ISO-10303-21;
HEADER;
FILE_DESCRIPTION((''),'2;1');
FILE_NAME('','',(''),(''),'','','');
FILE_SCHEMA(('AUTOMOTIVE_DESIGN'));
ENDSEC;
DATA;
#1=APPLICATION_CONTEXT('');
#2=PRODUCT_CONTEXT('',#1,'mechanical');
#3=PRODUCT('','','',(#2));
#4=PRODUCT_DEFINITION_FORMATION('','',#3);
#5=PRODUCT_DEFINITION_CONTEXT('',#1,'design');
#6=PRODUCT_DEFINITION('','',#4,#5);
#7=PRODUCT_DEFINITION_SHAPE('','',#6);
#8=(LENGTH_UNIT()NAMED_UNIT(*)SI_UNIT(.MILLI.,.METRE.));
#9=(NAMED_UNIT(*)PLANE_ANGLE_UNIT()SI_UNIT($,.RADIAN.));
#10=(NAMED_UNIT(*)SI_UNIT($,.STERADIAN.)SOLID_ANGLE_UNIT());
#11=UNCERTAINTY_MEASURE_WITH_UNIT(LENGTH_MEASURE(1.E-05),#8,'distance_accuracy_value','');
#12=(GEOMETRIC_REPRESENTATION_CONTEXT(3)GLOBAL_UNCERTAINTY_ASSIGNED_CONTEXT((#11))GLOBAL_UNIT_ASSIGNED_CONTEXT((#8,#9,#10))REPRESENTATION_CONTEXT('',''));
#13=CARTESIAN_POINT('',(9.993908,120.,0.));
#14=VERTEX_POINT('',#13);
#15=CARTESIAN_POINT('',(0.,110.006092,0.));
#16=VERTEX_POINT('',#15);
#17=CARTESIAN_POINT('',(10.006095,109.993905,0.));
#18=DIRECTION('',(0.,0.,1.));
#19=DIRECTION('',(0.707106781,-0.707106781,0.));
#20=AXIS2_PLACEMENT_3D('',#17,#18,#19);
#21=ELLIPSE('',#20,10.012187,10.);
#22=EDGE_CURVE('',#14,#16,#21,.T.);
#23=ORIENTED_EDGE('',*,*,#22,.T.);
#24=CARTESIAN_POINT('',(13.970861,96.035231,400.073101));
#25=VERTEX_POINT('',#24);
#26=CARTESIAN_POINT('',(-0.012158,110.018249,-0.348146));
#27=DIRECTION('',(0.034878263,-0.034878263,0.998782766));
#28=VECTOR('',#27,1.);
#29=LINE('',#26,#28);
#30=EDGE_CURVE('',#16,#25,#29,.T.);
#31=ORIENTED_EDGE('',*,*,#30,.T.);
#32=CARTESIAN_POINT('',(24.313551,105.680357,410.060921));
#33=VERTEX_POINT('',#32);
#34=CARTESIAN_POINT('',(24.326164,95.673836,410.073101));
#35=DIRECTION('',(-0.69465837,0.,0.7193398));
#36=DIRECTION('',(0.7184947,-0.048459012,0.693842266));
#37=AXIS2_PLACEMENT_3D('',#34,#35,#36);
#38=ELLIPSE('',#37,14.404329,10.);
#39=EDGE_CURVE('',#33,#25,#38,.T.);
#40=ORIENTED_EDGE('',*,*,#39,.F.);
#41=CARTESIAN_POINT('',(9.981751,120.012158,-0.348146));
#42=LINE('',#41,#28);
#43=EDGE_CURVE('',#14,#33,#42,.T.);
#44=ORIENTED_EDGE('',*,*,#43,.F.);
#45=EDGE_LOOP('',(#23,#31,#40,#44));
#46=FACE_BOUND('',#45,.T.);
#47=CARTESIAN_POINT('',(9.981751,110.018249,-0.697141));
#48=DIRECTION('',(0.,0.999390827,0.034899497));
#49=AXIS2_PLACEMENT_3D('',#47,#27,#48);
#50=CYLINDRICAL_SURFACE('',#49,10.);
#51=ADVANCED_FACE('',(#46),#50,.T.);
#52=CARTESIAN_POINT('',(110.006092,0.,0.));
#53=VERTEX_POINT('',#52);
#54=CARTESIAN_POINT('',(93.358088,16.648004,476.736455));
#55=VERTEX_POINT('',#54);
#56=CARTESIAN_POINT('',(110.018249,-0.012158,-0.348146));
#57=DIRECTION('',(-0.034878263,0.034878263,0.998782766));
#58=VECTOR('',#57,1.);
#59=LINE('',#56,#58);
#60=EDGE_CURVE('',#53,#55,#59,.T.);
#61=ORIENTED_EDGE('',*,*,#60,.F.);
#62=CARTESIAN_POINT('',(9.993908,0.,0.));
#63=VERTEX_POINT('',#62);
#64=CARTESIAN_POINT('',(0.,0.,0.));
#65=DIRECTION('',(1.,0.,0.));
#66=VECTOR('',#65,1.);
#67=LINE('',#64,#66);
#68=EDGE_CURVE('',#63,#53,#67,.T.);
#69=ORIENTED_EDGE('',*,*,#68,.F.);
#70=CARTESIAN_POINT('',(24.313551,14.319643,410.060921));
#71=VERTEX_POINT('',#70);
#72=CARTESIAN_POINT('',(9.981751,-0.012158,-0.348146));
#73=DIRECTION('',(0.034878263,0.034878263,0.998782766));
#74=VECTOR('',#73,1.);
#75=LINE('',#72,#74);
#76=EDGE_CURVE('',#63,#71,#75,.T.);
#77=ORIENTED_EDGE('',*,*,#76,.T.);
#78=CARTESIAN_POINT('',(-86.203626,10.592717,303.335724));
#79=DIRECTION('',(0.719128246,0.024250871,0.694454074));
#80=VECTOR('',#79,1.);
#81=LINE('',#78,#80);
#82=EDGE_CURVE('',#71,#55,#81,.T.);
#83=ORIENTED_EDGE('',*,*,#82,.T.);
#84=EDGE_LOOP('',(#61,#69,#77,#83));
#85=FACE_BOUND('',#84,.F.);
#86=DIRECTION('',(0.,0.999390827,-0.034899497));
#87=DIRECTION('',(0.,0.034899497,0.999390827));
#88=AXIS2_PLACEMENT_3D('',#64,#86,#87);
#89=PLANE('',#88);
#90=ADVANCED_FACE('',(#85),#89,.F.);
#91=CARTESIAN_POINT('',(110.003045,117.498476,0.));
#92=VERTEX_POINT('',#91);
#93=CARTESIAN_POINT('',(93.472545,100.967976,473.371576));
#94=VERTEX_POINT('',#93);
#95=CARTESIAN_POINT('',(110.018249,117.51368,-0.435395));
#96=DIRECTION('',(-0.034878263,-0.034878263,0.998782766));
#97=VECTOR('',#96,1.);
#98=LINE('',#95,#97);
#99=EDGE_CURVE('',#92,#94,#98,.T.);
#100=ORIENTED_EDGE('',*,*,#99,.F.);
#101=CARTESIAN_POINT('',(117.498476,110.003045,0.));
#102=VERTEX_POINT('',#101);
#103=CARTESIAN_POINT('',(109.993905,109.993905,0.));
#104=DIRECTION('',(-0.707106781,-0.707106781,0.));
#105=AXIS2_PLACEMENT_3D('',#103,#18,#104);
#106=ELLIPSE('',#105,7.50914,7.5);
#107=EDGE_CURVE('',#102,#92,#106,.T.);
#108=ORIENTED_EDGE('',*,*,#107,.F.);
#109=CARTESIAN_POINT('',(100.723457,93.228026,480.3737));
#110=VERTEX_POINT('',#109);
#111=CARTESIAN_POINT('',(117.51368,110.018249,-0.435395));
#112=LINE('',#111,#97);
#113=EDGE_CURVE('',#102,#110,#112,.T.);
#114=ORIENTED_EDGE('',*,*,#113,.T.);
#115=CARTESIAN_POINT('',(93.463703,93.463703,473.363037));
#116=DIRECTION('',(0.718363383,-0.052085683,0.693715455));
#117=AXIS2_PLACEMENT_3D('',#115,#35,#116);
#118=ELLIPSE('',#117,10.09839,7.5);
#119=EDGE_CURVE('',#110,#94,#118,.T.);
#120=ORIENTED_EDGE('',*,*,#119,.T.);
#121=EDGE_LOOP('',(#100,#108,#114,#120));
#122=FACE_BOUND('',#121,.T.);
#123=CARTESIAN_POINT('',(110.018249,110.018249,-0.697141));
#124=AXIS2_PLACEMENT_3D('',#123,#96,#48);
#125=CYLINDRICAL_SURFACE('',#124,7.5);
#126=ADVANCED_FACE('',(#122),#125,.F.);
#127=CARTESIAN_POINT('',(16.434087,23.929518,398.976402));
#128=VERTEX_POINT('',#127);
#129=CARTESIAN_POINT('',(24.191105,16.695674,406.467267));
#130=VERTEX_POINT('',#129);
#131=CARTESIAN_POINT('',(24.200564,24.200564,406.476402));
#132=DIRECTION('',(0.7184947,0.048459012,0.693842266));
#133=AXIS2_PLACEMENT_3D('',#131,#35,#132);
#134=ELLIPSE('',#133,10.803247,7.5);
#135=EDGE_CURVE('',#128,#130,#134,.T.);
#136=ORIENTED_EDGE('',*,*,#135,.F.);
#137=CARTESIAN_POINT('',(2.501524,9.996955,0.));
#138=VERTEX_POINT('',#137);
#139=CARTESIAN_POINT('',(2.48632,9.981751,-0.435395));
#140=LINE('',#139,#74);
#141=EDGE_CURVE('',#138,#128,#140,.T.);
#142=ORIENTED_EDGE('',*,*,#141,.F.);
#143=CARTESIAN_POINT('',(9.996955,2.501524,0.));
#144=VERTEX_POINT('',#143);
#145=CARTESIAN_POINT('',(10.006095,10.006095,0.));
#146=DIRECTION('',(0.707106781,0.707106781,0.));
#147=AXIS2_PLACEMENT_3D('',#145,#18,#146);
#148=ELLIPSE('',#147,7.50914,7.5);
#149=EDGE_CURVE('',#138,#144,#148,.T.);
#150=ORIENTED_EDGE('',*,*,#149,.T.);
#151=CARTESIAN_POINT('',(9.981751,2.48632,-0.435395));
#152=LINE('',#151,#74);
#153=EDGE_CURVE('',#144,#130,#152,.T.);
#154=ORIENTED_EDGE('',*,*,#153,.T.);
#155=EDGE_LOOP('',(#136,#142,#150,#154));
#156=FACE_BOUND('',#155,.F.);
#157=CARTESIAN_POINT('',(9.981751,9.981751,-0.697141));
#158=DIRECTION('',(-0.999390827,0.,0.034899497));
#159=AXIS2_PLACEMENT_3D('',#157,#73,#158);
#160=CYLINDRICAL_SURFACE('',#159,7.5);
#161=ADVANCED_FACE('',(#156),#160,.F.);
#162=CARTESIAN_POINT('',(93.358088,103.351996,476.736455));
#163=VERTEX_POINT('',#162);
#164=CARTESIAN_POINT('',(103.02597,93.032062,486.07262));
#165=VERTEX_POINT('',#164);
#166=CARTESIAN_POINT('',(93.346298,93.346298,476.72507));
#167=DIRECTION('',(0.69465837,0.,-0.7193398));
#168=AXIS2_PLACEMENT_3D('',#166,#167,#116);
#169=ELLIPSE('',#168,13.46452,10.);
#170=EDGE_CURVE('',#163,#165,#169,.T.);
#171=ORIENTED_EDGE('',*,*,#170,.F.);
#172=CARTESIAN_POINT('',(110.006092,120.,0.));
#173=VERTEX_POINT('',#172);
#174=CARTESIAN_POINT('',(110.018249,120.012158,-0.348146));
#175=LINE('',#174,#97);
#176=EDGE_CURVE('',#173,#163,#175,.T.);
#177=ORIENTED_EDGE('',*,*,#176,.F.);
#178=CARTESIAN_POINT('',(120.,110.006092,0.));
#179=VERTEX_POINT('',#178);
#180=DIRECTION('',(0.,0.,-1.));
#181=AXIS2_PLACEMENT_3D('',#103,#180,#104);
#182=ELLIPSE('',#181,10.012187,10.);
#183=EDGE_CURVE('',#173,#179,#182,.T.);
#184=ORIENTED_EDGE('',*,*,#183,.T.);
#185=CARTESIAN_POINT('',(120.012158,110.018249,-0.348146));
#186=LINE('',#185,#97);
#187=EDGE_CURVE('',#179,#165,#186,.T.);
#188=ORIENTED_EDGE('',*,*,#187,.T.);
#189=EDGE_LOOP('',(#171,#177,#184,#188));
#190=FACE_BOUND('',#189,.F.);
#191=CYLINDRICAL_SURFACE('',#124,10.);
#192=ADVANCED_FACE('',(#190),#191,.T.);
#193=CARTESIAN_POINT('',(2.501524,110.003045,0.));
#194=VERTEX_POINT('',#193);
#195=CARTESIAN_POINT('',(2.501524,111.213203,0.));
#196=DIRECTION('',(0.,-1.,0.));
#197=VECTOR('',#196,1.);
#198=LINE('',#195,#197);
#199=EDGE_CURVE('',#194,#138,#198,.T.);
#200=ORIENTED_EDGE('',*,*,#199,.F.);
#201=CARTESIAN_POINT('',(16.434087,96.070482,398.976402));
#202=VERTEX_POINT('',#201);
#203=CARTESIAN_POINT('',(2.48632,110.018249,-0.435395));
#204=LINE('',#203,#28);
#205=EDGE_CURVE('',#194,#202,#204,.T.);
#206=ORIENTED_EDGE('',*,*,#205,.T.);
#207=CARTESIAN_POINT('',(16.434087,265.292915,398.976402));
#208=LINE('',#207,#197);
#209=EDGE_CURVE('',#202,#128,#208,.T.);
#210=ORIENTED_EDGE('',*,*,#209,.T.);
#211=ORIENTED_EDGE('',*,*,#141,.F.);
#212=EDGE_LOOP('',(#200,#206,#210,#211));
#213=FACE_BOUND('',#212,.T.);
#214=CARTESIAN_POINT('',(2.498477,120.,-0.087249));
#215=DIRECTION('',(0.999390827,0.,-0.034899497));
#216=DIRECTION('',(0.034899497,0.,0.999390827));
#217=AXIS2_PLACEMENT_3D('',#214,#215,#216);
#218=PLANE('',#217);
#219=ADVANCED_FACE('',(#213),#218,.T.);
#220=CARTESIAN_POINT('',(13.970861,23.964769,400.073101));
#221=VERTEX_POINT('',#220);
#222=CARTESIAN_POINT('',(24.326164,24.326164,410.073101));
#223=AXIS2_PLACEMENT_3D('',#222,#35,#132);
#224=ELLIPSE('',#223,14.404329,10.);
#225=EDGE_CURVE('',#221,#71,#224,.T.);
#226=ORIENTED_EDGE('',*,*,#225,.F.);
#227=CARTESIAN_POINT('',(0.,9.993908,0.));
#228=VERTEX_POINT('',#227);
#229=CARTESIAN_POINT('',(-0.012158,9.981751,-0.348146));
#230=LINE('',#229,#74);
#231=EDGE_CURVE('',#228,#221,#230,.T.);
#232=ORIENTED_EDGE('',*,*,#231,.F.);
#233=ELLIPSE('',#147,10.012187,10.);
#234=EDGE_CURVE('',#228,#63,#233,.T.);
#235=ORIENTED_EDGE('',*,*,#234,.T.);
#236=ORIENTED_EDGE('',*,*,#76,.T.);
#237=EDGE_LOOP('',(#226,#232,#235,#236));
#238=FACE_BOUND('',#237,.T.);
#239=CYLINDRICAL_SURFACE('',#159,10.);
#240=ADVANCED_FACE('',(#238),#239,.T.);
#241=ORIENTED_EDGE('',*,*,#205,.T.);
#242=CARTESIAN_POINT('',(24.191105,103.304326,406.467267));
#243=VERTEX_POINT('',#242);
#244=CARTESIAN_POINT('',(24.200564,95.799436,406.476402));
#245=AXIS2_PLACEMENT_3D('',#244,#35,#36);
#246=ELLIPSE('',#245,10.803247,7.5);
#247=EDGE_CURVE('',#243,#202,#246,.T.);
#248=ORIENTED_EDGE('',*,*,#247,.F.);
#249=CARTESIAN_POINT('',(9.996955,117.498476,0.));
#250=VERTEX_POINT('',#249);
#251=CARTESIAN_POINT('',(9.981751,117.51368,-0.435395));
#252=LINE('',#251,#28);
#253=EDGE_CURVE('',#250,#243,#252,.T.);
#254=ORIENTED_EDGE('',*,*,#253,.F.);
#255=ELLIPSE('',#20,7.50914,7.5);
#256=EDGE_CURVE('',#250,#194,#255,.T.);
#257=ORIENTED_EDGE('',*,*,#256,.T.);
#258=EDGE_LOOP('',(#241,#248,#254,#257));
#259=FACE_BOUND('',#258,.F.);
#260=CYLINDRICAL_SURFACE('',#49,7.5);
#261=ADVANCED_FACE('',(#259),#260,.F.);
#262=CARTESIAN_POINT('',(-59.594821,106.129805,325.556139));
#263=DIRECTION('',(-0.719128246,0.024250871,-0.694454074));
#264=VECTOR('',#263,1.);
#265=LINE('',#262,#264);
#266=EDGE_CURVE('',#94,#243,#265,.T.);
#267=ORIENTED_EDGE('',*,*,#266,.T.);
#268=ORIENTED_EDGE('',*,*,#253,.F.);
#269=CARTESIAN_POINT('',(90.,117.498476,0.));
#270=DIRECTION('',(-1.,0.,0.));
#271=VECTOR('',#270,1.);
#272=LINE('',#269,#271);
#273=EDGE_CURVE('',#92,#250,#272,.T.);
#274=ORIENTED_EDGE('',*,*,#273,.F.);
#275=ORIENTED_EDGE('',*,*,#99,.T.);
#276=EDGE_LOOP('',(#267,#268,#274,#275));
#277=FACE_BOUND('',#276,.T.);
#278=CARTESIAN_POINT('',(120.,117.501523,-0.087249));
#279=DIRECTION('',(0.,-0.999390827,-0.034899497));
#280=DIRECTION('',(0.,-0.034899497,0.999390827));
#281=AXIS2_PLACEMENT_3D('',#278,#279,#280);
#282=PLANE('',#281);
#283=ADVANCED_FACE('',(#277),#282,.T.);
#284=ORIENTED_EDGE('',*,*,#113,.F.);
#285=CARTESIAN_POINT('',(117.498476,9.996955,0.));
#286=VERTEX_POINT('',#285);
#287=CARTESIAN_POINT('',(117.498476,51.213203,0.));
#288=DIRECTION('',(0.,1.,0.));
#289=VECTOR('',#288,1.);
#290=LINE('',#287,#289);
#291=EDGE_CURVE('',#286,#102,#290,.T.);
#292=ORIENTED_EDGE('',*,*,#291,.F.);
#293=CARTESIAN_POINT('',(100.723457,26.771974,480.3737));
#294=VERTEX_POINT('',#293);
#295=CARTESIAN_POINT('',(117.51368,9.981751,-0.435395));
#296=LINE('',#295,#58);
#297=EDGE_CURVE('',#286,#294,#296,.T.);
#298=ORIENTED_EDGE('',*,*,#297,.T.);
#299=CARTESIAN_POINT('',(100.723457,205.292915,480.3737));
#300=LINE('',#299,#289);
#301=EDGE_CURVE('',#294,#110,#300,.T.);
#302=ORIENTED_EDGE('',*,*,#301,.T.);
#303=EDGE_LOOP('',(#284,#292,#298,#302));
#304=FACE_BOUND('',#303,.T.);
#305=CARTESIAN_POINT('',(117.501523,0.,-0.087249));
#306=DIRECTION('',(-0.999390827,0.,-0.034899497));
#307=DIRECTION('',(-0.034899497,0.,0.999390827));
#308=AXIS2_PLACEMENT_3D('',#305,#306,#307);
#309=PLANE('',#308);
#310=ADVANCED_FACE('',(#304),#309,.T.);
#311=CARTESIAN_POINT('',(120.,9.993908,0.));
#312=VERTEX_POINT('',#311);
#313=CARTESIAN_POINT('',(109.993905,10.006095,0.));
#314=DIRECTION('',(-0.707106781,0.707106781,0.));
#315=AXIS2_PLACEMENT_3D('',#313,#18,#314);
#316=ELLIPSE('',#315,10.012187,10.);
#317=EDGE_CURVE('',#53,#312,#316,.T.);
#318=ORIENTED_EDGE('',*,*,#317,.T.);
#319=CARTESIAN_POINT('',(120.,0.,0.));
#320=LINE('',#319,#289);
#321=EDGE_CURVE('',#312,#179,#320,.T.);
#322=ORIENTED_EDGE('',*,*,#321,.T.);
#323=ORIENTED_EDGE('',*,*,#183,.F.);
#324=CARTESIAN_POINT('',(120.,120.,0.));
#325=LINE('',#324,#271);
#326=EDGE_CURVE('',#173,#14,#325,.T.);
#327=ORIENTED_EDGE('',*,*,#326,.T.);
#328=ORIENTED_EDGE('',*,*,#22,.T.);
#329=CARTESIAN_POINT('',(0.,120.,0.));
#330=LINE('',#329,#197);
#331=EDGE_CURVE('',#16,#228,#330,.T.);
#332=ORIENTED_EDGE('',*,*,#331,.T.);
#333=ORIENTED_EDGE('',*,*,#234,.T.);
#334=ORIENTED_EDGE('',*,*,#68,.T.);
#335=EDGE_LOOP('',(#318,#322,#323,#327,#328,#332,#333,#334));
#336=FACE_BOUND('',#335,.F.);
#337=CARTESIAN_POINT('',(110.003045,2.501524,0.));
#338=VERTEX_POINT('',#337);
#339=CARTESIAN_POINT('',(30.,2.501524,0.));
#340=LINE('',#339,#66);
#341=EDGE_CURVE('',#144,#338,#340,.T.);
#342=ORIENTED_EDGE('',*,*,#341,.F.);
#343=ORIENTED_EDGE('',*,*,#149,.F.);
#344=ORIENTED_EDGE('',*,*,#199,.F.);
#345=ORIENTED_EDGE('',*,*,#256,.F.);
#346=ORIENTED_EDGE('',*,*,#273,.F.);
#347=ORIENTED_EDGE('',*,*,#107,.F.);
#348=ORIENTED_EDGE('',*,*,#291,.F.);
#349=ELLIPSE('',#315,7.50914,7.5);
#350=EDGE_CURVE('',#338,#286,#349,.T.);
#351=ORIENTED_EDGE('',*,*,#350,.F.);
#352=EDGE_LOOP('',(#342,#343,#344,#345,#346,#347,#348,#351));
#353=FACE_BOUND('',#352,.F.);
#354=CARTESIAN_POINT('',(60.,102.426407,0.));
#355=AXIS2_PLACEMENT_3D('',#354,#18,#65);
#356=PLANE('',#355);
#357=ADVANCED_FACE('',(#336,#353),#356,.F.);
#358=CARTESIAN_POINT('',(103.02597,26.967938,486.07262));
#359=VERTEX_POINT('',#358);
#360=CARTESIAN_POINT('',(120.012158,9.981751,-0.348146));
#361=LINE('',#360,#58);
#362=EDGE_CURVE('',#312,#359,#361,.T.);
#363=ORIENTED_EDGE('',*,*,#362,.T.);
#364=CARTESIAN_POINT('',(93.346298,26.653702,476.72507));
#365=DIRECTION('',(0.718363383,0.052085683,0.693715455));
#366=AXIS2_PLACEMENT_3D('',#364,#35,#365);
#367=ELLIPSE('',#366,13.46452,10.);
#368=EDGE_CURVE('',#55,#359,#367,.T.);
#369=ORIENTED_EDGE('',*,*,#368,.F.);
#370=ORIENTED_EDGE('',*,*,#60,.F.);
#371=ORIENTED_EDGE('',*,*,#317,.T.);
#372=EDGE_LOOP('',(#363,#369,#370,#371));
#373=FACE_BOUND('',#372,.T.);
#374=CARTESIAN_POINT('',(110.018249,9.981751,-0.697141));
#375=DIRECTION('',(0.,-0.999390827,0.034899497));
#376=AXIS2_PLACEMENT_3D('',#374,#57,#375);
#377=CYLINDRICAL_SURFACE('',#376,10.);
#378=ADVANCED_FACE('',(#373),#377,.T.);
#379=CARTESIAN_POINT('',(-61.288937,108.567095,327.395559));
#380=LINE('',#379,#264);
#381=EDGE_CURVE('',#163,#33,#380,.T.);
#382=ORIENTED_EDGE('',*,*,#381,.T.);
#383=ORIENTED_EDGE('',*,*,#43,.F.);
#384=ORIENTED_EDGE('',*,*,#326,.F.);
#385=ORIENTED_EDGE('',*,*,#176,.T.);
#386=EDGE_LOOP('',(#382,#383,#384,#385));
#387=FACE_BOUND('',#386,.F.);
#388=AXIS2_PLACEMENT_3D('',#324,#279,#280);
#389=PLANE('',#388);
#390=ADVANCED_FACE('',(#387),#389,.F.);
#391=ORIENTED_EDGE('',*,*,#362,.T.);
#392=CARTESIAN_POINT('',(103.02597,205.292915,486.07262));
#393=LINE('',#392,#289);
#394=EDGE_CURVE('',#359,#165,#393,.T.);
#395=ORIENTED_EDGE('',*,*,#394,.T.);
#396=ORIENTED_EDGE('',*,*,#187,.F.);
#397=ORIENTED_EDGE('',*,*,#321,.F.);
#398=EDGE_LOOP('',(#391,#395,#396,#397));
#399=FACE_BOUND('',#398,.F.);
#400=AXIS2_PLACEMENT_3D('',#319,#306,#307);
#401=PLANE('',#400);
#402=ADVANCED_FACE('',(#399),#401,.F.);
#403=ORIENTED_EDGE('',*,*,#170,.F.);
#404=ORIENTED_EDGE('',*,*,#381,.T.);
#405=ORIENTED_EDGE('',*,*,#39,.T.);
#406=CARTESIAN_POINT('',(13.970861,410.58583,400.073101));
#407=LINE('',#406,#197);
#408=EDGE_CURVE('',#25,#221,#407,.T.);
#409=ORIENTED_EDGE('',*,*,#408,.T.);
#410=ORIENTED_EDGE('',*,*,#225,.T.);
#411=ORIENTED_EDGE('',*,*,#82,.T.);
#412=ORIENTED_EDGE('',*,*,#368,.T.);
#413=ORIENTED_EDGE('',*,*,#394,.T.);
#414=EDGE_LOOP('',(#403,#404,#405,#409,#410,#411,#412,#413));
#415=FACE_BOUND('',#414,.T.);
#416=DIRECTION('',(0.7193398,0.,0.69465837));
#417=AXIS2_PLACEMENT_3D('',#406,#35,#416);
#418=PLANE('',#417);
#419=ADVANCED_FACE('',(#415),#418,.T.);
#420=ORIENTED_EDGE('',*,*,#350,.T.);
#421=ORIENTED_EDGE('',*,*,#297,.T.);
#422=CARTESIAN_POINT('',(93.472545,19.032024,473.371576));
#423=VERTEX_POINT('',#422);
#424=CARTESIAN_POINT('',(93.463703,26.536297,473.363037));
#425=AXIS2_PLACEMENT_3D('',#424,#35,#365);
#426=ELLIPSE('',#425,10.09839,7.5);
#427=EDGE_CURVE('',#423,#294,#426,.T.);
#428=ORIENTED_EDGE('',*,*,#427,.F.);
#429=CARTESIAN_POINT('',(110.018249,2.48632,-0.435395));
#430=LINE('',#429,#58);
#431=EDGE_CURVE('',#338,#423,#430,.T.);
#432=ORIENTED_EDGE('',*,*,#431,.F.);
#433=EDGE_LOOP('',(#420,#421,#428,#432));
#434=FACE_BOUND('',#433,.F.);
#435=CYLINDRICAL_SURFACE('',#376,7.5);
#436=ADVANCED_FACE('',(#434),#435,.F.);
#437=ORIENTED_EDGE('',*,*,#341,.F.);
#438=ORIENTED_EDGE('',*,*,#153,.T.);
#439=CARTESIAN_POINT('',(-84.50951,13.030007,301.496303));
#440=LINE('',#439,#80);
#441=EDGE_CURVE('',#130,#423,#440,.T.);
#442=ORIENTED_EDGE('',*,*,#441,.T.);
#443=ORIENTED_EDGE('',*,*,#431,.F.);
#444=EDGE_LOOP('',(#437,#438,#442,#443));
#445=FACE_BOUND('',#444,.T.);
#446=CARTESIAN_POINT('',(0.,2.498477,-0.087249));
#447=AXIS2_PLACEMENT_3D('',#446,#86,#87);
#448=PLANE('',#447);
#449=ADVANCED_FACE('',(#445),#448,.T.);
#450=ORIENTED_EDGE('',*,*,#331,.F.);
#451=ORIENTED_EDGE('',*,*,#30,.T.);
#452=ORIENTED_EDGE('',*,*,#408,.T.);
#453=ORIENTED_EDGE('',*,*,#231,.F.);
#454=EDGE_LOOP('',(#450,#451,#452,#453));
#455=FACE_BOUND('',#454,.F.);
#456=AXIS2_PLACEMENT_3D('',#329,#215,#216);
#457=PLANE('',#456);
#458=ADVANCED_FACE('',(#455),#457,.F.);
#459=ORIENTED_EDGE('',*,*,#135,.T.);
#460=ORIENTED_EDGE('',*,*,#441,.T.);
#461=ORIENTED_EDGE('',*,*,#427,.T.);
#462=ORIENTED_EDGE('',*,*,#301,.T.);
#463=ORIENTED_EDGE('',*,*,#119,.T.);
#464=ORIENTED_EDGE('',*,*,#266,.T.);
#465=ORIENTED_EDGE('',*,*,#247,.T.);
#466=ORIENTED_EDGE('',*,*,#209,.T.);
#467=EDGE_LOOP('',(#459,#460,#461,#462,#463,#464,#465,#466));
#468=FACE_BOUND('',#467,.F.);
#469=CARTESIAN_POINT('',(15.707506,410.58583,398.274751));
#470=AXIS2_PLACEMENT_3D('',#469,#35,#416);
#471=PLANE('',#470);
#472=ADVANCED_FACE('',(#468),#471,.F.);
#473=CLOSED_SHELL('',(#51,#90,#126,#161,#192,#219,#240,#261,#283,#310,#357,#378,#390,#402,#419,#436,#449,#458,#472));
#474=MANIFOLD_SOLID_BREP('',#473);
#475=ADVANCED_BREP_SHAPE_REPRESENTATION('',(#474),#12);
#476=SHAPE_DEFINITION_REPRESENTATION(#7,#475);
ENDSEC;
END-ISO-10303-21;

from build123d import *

# Parameters (mm, degrees)
F2_DEPTH    = 520
F2_TAPER    = 2
F3_T1_DEPTH = 701.1716597564
F4_R        = 10
F5_T        = -2.5


# Not quite as in the source:
# - a fillet or chamfer that OpenCascade refuses, or shapes differently, is made with other operations: its cross-section is extruded or revolved along the edge and cut away or added


with BuildPart() as f2:
    # F0 (on Top) → F2 (new body)
    with BuildSketch(Plane.XY):
        Polygon((120, 120), (0, 120), (60, 60), align=None)
        Polygon((60, 60), (120, 0), (120, 120), align=None)
        Polygon((60, 60), (0, 0), (120, 0), align=None)
        Polygon((0, 120), (0, 0), (60, 60), align=None)
    extrude(amount=F2_DEPTH, taper=F2_TAPER)

    # F3: chamfer of 120 on 1 edges, made by hand

    # F3_s2 → F3_t1 (cut)
    with BuildSketch(Plane.XZ.offset(-410.5858298782)):
        Polygon((13.9708605314, 400.0731007577), (138.1588001357, 520), (18.1588001357, 520), align=None)
    extrude(amount=F3_T1_DEPTH, mode=Mode.SUBTRACT)

    # F4
    f4_edges = [f2.edges().sort_by_distance(p)[0] for p in [
        (6.98543, 6.98543, 200.03655),
        (6.98543, 113.01457, 200.03655),
        (111.512985, 8.487015, 243.03631),
        (111.512985, 111.512985, 243.03631),
    ]]
    fillet(f4_edges, radius=F4_R)

    # F5
    f5_openings = [f2.faces().sort_by_distance(p)[0] for p in [
        (60, 60, 0),
    ]]
    offset(amount=F5_T, openings=f5_openings)


solid = f2.part
